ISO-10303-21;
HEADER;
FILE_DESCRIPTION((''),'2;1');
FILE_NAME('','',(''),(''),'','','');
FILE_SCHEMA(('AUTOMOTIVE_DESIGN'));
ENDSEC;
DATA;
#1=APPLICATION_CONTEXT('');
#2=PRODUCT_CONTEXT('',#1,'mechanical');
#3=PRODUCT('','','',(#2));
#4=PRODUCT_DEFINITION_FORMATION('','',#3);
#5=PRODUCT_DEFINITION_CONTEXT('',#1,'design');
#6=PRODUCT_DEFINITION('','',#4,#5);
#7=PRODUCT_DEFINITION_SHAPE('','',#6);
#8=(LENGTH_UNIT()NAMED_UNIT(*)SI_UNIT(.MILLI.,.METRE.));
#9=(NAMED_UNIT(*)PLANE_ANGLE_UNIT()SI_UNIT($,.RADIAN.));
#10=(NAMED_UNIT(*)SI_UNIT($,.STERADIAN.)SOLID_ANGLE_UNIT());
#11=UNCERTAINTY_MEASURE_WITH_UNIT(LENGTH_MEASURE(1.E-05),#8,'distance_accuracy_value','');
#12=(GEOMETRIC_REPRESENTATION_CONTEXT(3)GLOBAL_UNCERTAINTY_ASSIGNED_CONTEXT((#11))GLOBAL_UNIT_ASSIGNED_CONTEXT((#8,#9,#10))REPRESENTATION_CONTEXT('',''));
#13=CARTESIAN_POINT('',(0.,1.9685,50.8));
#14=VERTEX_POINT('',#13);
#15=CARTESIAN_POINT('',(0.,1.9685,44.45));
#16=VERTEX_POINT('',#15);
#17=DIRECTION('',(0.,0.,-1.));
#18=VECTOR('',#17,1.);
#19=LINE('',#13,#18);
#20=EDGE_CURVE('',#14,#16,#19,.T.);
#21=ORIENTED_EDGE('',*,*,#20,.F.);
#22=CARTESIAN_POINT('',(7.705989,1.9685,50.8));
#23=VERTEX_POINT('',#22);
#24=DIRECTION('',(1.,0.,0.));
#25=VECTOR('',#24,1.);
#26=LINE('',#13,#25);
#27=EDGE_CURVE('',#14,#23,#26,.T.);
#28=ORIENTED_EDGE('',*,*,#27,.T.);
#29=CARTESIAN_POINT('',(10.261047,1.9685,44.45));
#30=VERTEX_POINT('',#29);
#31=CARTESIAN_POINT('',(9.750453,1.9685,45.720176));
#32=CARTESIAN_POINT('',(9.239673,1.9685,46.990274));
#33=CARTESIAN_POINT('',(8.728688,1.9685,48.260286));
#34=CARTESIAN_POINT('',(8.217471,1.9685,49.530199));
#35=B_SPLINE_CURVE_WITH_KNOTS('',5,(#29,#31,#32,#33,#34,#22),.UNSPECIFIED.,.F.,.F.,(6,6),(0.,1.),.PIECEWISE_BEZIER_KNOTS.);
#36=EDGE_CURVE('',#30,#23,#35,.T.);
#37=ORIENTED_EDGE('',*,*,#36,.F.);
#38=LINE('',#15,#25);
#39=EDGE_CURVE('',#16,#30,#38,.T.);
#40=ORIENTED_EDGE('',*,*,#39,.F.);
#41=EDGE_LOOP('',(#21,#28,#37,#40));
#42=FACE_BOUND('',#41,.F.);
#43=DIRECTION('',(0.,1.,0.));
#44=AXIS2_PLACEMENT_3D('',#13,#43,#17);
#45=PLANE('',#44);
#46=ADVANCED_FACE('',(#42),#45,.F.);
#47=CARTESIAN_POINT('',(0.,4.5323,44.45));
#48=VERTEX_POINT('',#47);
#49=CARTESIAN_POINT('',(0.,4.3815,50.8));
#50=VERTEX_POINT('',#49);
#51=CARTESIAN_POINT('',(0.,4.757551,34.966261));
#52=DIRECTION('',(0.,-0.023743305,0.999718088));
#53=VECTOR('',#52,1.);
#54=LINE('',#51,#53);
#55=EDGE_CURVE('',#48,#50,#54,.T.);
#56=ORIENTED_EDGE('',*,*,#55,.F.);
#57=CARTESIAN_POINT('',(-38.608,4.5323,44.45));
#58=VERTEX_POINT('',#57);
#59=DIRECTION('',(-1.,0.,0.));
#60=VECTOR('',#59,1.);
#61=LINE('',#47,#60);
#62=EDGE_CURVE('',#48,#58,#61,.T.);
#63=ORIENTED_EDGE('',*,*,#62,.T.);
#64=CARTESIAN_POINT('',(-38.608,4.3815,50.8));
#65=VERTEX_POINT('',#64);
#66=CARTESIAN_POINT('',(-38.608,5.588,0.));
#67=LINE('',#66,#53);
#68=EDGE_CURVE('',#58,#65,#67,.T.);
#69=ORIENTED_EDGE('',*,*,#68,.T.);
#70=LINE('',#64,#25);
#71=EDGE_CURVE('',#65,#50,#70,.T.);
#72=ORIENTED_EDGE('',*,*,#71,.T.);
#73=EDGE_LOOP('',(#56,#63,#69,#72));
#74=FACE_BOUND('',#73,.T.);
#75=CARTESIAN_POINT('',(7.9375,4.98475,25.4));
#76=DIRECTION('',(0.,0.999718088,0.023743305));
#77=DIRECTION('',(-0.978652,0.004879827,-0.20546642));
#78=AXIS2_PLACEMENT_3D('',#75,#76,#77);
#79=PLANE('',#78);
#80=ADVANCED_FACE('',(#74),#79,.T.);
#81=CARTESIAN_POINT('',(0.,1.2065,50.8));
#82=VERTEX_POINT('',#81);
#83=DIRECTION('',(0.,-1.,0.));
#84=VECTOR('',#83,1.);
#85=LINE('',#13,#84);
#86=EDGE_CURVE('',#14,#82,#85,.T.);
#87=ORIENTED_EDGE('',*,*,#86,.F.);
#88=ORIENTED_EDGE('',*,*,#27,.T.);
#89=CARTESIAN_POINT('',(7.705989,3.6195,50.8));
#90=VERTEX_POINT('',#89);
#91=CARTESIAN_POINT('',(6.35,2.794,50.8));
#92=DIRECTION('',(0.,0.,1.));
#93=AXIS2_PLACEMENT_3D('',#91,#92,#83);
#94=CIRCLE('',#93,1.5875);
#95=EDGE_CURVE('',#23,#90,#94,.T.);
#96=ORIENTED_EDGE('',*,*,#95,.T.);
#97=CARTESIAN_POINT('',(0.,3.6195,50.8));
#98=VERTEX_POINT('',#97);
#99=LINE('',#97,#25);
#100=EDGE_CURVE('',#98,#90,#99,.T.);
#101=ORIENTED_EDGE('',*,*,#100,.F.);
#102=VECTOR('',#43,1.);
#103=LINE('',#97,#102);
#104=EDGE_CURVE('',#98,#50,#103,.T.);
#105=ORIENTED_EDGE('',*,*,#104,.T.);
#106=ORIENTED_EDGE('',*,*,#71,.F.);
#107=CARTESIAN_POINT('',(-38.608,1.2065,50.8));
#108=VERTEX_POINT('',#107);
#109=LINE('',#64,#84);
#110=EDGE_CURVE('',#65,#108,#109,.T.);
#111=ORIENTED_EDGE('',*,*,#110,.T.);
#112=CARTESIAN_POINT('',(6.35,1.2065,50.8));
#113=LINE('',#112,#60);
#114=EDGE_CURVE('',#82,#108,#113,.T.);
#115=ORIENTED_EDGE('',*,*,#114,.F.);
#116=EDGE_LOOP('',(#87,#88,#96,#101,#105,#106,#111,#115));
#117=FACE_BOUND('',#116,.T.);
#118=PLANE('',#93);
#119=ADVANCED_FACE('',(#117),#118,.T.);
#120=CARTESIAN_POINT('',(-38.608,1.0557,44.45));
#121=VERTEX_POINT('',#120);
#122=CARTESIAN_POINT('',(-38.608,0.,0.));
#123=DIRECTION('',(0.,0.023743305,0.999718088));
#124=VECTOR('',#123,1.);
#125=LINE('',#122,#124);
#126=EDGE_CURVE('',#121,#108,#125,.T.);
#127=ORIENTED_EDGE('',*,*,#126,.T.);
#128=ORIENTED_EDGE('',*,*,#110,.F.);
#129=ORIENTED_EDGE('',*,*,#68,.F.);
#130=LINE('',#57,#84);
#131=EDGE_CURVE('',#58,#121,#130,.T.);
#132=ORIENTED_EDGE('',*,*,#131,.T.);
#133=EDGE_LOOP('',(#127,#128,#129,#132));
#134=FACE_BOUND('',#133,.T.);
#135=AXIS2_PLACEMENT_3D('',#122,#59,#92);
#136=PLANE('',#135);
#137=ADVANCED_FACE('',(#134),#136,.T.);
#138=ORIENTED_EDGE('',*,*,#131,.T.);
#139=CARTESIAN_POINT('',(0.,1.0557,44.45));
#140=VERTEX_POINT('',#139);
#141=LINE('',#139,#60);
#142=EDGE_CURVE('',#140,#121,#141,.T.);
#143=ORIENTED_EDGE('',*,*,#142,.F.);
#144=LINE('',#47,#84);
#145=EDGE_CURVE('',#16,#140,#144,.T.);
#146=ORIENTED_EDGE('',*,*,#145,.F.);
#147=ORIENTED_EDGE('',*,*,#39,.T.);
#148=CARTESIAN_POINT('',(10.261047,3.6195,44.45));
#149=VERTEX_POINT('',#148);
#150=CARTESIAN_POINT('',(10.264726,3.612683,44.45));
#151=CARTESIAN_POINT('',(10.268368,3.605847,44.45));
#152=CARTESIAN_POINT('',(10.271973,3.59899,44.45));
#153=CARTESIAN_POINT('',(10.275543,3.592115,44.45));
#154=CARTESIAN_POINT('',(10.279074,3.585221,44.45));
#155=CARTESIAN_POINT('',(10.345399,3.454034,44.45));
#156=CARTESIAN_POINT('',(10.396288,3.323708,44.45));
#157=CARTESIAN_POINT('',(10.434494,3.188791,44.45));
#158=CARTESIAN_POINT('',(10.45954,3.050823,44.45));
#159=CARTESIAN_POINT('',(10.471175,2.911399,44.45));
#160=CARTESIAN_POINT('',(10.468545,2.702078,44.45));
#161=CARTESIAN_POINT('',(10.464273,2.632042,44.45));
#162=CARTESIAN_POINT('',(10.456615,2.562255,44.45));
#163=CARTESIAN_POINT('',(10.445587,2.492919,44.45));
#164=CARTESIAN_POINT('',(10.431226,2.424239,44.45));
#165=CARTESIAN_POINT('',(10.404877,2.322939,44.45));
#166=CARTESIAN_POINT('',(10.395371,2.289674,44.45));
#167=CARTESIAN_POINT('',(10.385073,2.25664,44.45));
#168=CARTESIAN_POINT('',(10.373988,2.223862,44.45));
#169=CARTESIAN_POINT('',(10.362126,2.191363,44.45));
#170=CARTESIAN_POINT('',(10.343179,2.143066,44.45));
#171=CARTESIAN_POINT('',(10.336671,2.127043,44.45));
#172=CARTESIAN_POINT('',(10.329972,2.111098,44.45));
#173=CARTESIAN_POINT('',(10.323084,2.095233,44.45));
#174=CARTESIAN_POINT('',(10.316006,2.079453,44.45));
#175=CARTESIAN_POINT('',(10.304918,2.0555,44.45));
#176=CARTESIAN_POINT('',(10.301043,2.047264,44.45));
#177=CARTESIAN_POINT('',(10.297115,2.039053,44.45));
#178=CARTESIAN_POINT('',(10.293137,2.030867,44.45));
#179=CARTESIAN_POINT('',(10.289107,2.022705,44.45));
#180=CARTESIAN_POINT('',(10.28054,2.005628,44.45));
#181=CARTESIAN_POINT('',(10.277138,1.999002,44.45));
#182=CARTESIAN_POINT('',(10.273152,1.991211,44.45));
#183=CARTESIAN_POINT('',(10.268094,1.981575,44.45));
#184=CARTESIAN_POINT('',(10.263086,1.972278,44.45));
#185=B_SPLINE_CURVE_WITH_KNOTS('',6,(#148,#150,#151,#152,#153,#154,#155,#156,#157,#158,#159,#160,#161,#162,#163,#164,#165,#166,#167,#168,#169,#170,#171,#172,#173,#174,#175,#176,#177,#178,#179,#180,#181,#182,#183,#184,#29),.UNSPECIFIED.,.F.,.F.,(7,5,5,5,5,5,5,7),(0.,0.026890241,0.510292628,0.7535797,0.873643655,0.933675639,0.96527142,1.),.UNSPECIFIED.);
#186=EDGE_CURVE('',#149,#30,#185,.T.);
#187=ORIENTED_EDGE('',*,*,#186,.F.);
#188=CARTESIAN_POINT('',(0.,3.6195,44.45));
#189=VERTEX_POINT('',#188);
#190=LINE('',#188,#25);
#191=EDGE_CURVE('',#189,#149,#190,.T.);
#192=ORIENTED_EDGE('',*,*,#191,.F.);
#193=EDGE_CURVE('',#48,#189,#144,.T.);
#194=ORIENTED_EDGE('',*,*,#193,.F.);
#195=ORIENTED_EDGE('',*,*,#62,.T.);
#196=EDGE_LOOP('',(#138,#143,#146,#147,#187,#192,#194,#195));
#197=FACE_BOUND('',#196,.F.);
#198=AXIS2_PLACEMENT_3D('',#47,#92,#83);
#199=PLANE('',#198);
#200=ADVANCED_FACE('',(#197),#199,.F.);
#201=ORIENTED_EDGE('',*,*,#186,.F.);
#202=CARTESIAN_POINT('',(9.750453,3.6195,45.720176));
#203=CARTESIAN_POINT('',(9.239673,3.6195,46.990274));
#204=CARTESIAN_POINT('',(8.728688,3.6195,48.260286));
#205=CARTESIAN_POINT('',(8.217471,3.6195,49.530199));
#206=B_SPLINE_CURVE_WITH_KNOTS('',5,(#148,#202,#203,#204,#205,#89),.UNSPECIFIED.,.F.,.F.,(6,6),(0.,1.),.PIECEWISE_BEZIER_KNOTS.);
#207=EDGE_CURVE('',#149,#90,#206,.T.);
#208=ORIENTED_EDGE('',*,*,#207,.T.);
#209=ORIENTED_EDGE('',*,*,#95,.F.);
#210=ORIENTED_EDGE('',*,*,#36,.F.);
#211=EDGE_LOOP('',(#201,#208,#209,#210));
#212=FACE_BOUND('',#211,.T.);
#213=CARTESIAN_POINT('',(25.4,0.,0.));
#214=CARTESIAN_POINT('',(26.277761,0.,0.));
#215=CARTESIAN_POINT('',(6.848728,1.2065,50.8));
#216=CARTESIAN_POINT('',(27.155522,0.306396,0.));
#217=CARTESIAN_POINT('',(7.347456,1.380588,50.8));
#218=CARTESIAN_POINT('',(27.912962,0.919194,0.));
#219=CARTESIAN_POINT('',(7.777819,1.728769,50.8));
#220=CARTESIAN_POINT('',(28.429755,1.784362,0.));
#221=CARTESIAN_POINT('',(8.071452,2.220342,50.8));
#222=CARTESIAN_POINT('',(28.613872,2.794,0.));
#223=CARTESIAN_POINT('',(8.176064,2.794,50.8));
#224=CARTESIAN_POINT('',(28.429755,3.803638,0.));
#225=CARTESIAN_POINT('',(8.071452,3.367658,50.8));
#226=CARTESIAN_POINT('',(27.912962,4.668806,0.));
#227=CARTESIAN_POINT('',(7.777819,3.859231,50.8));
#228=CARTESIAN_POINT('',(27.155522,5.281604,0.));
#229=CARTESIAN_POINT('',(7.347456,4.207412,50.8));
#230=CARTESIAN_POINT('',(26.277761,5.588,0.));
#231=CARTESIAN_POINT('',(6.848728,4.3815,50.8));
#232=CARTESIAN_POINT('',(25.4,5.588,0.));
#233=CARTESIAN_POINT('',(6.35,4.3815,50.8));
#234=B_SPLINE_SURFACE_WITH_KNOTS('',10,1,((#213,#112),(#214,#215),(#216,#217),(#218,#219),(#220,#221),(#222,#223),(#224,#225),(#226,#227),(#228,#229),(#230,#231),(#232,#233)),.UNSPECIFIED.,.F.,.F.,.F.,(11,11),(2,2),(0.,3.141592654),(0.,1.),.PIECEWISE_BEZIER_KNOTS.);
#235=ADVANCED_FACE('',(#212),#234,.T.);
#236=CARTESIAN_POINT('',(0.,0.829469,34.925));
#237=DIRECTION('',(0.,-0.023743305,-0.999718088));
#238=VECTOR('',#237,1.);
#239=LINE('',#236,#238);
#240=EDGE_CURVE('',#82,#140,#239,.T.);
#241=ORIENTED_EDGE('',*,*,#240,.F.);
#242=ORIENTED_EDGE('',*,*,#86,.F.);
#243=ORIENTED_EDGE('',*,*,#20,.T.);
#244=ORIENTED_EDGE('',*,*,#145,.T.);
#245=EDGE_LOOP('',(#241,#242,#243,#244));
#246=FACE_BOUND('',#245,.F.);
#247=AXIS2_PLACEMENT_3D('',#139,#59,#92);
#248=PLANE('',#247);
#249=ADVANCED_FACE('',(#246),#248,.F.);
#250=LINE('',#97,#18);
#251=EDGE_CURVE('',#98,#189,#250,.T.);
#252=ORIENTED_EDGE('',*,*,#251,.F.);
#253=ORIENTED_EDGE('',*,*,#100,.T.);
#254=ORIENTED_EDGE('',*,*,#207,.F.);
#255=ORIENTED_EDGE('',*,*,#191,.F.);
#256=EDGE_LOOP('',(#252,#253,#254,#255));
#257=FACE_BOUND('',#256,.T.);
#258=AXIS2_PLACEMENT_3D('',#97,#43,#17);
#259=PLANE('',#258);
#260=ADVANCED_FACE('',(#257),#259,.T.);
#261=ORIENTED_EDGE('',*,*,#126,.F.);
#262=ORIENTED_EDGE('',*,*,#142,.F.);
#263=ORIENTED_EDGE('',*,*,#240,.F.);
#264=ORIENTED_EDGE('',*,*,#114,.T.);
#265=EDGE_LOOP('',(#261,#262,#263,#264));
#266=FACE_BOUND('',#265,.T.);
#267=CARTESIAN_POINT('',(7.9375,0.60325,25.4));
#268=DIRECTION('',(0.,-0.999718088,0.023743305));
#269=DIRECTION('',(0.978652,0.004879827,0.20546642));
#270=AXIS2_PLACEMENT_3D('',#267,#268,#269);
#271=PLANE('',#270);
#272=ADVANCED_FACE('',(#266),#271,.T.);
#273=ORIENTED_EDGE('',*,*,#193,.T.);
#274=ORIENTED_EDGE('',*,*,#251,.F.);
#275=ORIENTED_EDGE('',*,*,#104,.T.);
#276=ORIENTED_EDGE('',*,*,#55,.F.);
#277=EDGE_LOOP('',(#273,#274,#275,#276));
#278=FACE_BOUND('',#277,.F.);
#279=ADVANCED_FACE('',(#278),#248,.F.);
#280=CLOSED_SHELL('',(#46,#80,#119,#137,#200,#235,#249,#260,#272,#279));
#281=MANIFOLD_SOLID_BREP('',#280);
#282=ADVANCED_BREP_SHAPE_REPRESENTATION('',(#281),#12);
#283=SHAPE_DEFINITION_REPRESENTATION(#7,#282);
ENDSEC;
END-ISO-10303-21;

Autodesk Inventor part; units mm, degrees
ref_plane "YZ Plane" through (0, 0, 0) normal (1, 0, 0) x (0, 1, 0)
ref_plane "XZ Plane" through (0, 0, 0) normal (0, 1, 0) x (-1, 0, 0)
sketch "Sketch2" plane through (0, 0, 0) normal (0, 0, 1) x (1, 0, 0)
  line L0 (0, 0) -> (25.4, 0)
  line L1 (25.4, 0) -> (25.4, 5.588)
  line L2 (25.4, 5.588) -> (0, 5.588)
  line L3 (0, 5.588) -> (0, 0)
  arc A0 (25.4, 0) -> (25.4, 5.588) centre (25.4, 2.794) ccw
  dimension "d0" = 25.4
  dimension "d1" = 5.588
ref_plane "Work Plane1" through (0, 0, 50.8) normal (0, 0, 1) x (1, 0, 0)
sketch "Sketch3" plane through (0, 0, 50.8) normal (0, 0, 1) x (1, 0, 0)
  line L0 (0, 1.2065) -> (6.35, 1.2065)
  line L1 (6.35, 1.2065) -> (6.35, 4.3815)
  line L2 (6.35, 4.3815) -> (0, 4.3815)
  line L3 (0, 4.3815) -> (0, 1.2065)
  arc A0 (6.35, 1.2065) -> (6.35, 4.3815) centre (6.35, 2.794) ccw
  point P0 (0, 0)
  dimension "d3" = 6.35
  dimension "d4" = 3.175
  dimension "d5" = 1.2065
loft "Loft1" add profiles "Sketch2", "Sketch3"
sketch "Sketch4" plane through (0, 0, 0) normal (-1, 0, 0) x (0, 0, 1)
  line L0 (0, 5.588) -> (0, 0) projected
  line L1 (0, 0) -> (50.8, 1.2065) projected
  line L2 (50.8, 4.3815) -> (50.8, 1.2065) projected
  line L3 (0, 5.588) -> (50.8, 4.3815) projected
  line L4 (0, 5.588) -> (50.8, 4.3815) projected
  line L5 (44.45, 4.5323) -> (44.45, 1.0557)
  line L6 (50.8, 1.2065) -> (0, 0) projected
  dimension "d10" = 6.35
extrude "Extrusion1" add sketch "Sketch4" along normal blind 38.608 contours L3 L2 L1 L5
sketch "Sketch5" plane through (25.4, 5.588, 0) normal (0, 0, -1) x (-1, 0, 0)
  line L0 (25.4, 0) -> (25.4, -5.588) projected
  line L1 (0, 0) -> (25.4, 0) projected
  arc A0 (0, 0) -> (0, -5.588) centre (0, -2.794) ccw projected
  line L2 (25.4, -5.588) -> (0, -5.588) projected
  line L3 (25.4, 0) -> (25.4, -5.588) projected
  line L4 (25.4, 0) -> (36.1487, 0)
  line L5 (36.1487, 0) -> (36.1487, -5.5776)
  line L6 (36.1487, -5.5776) -> (25.4, -5.5776)
  line L7 (25.4, -5.5776) -> (25.4, 0)
  line L8 (-3.175, -0.1076) -> (-3.175, -7.007)
  line L9 (25.4, -5.588) -> (0, -5.588) projected
revolve "Revolution1" add sketch "Sketch5" angle 15 about axis through (28.575, 5.4804, 0) along (0, -1, 0)
sketch "Sketch7" plane through (-10.7487, 5.588, 0) normal (0, 1, 0) x (1, 0, 0)
  line L0 (0, 0) -> (10.7487, 0) projected
  line L1 (36.1487, 0) -> (10.7487, 0) projected
  arc A0 (36.2569, 0.8218) -> (36.1487, 0) centre (39.3237, 0) ccw projected
  line L2 (1.3399, 10.1777) -> (36.2569, 0.8218) projected
  arc A1 (1.3399, 10.1777) -> (0, 0) centre (39.3237, 0) ccw projected
  line L3 (10.7487, 0) -> (10.7487, -44.45) projected
  line L4 (10.7487, 0) -> (-2.0556, 0)
  line L5 (-2.0556, 0) -> (-2.0556, 10.6947)
  line L6 (-2.0556, 10.6947) -> (10.7487, 10.6947)
  line L7 (10.7487, 10.6947) -> (10.7487, 0)
extrude "Extrusion2" cut sketch "Sketch7" against normal blind 38.1 contours A1 L2 L7 L0 | L4 L5 L6 L7 L2 A1
sketch "Sketch8" plane through (0, 0.0104, -7.6566) normal (0.258819, 0, -0.9659258) x (-0.9659258, 0, -0.258819)
  line L0 (-29.583, 2.7836) -> (-24.8205, 2.7836)
  line L1 (-24.8205, 2.7836) -> (-8.9455, 2.7836)
  circle A0 centre (-24.8205, 2.7836) radius 1.27
  circle A1 centre (-8.9455, 2.7836) radius 1.27
  line L2 (-26.408, -0.0104) -> (0, -0.0104) projected
  point P0 (-1.9817, -0.0104)
  point P1 (0, 0)
  dimension "d17" = 4.7625
  dimension "d18" = 15.875
  dimension "d19" = 2.54
  dimension "d20" = 2.54
  dimension "d23" = 2.794
extrude "Extrusion4" cut sketch "Sketch8" against normal blind 12.7
sketch "Sketch9" plane through (0, 1.0557, 44.45) normal (-1, 0, 0) x (0, 0, 1)
  line L0 (6.35, 0.1508) -> (6.35, 3.3258) projected
  line L1 (6.35, 3.3258) -> (0, 3.4766) projected
  line L2 (0, 3.4766) -> (0, 0) projected
  line L3 (0, 0) -> (6.35, 0.1508) projected
  line L4 (6.35, 3.3258) -> (6.35, 0.1508) projected
  line L5 (6.35, 2.5638) -> (0, 2.5638)
  line L6 (0, 3.4766) -> (0, 0) projected
  line L7 (6.35, 0.9128) -> (0, 0.9128)
  line L8 (6.35, 2.5638) -> (6.35, 4.769)
  line L9 (6.35, 4.769) -> (-56.0869, 8.5681)
  line L10 (-56.0869, 8.5681) -> (-57.3905, -12.8563)
  line L11 (-57.3905, -12.8563) -> (6.35, -0.7759)
  line L12 (6.35, -0.7759) -> (6.35, 0.9128)
  line L13 (0, 0.9128) -> (0, 0) construction
  line L14 (0, 2.5638) -> (0, 3.4766) construction
  line L15 (0, 2.5638) -> (0, 0.9128)
  point P0 (-44.45, -1.0557)
  dimension "d26" = 1.651
extrude "Extrusion5" cut sketch "Sketch9" against normal through all contours L3 L2 L7 L0 | L12 L11 L10 L9 L8 L1 L2 L3 | L5 L2 L1 L0
properties part number "DivePlanesStabilizingFins_Print2"
